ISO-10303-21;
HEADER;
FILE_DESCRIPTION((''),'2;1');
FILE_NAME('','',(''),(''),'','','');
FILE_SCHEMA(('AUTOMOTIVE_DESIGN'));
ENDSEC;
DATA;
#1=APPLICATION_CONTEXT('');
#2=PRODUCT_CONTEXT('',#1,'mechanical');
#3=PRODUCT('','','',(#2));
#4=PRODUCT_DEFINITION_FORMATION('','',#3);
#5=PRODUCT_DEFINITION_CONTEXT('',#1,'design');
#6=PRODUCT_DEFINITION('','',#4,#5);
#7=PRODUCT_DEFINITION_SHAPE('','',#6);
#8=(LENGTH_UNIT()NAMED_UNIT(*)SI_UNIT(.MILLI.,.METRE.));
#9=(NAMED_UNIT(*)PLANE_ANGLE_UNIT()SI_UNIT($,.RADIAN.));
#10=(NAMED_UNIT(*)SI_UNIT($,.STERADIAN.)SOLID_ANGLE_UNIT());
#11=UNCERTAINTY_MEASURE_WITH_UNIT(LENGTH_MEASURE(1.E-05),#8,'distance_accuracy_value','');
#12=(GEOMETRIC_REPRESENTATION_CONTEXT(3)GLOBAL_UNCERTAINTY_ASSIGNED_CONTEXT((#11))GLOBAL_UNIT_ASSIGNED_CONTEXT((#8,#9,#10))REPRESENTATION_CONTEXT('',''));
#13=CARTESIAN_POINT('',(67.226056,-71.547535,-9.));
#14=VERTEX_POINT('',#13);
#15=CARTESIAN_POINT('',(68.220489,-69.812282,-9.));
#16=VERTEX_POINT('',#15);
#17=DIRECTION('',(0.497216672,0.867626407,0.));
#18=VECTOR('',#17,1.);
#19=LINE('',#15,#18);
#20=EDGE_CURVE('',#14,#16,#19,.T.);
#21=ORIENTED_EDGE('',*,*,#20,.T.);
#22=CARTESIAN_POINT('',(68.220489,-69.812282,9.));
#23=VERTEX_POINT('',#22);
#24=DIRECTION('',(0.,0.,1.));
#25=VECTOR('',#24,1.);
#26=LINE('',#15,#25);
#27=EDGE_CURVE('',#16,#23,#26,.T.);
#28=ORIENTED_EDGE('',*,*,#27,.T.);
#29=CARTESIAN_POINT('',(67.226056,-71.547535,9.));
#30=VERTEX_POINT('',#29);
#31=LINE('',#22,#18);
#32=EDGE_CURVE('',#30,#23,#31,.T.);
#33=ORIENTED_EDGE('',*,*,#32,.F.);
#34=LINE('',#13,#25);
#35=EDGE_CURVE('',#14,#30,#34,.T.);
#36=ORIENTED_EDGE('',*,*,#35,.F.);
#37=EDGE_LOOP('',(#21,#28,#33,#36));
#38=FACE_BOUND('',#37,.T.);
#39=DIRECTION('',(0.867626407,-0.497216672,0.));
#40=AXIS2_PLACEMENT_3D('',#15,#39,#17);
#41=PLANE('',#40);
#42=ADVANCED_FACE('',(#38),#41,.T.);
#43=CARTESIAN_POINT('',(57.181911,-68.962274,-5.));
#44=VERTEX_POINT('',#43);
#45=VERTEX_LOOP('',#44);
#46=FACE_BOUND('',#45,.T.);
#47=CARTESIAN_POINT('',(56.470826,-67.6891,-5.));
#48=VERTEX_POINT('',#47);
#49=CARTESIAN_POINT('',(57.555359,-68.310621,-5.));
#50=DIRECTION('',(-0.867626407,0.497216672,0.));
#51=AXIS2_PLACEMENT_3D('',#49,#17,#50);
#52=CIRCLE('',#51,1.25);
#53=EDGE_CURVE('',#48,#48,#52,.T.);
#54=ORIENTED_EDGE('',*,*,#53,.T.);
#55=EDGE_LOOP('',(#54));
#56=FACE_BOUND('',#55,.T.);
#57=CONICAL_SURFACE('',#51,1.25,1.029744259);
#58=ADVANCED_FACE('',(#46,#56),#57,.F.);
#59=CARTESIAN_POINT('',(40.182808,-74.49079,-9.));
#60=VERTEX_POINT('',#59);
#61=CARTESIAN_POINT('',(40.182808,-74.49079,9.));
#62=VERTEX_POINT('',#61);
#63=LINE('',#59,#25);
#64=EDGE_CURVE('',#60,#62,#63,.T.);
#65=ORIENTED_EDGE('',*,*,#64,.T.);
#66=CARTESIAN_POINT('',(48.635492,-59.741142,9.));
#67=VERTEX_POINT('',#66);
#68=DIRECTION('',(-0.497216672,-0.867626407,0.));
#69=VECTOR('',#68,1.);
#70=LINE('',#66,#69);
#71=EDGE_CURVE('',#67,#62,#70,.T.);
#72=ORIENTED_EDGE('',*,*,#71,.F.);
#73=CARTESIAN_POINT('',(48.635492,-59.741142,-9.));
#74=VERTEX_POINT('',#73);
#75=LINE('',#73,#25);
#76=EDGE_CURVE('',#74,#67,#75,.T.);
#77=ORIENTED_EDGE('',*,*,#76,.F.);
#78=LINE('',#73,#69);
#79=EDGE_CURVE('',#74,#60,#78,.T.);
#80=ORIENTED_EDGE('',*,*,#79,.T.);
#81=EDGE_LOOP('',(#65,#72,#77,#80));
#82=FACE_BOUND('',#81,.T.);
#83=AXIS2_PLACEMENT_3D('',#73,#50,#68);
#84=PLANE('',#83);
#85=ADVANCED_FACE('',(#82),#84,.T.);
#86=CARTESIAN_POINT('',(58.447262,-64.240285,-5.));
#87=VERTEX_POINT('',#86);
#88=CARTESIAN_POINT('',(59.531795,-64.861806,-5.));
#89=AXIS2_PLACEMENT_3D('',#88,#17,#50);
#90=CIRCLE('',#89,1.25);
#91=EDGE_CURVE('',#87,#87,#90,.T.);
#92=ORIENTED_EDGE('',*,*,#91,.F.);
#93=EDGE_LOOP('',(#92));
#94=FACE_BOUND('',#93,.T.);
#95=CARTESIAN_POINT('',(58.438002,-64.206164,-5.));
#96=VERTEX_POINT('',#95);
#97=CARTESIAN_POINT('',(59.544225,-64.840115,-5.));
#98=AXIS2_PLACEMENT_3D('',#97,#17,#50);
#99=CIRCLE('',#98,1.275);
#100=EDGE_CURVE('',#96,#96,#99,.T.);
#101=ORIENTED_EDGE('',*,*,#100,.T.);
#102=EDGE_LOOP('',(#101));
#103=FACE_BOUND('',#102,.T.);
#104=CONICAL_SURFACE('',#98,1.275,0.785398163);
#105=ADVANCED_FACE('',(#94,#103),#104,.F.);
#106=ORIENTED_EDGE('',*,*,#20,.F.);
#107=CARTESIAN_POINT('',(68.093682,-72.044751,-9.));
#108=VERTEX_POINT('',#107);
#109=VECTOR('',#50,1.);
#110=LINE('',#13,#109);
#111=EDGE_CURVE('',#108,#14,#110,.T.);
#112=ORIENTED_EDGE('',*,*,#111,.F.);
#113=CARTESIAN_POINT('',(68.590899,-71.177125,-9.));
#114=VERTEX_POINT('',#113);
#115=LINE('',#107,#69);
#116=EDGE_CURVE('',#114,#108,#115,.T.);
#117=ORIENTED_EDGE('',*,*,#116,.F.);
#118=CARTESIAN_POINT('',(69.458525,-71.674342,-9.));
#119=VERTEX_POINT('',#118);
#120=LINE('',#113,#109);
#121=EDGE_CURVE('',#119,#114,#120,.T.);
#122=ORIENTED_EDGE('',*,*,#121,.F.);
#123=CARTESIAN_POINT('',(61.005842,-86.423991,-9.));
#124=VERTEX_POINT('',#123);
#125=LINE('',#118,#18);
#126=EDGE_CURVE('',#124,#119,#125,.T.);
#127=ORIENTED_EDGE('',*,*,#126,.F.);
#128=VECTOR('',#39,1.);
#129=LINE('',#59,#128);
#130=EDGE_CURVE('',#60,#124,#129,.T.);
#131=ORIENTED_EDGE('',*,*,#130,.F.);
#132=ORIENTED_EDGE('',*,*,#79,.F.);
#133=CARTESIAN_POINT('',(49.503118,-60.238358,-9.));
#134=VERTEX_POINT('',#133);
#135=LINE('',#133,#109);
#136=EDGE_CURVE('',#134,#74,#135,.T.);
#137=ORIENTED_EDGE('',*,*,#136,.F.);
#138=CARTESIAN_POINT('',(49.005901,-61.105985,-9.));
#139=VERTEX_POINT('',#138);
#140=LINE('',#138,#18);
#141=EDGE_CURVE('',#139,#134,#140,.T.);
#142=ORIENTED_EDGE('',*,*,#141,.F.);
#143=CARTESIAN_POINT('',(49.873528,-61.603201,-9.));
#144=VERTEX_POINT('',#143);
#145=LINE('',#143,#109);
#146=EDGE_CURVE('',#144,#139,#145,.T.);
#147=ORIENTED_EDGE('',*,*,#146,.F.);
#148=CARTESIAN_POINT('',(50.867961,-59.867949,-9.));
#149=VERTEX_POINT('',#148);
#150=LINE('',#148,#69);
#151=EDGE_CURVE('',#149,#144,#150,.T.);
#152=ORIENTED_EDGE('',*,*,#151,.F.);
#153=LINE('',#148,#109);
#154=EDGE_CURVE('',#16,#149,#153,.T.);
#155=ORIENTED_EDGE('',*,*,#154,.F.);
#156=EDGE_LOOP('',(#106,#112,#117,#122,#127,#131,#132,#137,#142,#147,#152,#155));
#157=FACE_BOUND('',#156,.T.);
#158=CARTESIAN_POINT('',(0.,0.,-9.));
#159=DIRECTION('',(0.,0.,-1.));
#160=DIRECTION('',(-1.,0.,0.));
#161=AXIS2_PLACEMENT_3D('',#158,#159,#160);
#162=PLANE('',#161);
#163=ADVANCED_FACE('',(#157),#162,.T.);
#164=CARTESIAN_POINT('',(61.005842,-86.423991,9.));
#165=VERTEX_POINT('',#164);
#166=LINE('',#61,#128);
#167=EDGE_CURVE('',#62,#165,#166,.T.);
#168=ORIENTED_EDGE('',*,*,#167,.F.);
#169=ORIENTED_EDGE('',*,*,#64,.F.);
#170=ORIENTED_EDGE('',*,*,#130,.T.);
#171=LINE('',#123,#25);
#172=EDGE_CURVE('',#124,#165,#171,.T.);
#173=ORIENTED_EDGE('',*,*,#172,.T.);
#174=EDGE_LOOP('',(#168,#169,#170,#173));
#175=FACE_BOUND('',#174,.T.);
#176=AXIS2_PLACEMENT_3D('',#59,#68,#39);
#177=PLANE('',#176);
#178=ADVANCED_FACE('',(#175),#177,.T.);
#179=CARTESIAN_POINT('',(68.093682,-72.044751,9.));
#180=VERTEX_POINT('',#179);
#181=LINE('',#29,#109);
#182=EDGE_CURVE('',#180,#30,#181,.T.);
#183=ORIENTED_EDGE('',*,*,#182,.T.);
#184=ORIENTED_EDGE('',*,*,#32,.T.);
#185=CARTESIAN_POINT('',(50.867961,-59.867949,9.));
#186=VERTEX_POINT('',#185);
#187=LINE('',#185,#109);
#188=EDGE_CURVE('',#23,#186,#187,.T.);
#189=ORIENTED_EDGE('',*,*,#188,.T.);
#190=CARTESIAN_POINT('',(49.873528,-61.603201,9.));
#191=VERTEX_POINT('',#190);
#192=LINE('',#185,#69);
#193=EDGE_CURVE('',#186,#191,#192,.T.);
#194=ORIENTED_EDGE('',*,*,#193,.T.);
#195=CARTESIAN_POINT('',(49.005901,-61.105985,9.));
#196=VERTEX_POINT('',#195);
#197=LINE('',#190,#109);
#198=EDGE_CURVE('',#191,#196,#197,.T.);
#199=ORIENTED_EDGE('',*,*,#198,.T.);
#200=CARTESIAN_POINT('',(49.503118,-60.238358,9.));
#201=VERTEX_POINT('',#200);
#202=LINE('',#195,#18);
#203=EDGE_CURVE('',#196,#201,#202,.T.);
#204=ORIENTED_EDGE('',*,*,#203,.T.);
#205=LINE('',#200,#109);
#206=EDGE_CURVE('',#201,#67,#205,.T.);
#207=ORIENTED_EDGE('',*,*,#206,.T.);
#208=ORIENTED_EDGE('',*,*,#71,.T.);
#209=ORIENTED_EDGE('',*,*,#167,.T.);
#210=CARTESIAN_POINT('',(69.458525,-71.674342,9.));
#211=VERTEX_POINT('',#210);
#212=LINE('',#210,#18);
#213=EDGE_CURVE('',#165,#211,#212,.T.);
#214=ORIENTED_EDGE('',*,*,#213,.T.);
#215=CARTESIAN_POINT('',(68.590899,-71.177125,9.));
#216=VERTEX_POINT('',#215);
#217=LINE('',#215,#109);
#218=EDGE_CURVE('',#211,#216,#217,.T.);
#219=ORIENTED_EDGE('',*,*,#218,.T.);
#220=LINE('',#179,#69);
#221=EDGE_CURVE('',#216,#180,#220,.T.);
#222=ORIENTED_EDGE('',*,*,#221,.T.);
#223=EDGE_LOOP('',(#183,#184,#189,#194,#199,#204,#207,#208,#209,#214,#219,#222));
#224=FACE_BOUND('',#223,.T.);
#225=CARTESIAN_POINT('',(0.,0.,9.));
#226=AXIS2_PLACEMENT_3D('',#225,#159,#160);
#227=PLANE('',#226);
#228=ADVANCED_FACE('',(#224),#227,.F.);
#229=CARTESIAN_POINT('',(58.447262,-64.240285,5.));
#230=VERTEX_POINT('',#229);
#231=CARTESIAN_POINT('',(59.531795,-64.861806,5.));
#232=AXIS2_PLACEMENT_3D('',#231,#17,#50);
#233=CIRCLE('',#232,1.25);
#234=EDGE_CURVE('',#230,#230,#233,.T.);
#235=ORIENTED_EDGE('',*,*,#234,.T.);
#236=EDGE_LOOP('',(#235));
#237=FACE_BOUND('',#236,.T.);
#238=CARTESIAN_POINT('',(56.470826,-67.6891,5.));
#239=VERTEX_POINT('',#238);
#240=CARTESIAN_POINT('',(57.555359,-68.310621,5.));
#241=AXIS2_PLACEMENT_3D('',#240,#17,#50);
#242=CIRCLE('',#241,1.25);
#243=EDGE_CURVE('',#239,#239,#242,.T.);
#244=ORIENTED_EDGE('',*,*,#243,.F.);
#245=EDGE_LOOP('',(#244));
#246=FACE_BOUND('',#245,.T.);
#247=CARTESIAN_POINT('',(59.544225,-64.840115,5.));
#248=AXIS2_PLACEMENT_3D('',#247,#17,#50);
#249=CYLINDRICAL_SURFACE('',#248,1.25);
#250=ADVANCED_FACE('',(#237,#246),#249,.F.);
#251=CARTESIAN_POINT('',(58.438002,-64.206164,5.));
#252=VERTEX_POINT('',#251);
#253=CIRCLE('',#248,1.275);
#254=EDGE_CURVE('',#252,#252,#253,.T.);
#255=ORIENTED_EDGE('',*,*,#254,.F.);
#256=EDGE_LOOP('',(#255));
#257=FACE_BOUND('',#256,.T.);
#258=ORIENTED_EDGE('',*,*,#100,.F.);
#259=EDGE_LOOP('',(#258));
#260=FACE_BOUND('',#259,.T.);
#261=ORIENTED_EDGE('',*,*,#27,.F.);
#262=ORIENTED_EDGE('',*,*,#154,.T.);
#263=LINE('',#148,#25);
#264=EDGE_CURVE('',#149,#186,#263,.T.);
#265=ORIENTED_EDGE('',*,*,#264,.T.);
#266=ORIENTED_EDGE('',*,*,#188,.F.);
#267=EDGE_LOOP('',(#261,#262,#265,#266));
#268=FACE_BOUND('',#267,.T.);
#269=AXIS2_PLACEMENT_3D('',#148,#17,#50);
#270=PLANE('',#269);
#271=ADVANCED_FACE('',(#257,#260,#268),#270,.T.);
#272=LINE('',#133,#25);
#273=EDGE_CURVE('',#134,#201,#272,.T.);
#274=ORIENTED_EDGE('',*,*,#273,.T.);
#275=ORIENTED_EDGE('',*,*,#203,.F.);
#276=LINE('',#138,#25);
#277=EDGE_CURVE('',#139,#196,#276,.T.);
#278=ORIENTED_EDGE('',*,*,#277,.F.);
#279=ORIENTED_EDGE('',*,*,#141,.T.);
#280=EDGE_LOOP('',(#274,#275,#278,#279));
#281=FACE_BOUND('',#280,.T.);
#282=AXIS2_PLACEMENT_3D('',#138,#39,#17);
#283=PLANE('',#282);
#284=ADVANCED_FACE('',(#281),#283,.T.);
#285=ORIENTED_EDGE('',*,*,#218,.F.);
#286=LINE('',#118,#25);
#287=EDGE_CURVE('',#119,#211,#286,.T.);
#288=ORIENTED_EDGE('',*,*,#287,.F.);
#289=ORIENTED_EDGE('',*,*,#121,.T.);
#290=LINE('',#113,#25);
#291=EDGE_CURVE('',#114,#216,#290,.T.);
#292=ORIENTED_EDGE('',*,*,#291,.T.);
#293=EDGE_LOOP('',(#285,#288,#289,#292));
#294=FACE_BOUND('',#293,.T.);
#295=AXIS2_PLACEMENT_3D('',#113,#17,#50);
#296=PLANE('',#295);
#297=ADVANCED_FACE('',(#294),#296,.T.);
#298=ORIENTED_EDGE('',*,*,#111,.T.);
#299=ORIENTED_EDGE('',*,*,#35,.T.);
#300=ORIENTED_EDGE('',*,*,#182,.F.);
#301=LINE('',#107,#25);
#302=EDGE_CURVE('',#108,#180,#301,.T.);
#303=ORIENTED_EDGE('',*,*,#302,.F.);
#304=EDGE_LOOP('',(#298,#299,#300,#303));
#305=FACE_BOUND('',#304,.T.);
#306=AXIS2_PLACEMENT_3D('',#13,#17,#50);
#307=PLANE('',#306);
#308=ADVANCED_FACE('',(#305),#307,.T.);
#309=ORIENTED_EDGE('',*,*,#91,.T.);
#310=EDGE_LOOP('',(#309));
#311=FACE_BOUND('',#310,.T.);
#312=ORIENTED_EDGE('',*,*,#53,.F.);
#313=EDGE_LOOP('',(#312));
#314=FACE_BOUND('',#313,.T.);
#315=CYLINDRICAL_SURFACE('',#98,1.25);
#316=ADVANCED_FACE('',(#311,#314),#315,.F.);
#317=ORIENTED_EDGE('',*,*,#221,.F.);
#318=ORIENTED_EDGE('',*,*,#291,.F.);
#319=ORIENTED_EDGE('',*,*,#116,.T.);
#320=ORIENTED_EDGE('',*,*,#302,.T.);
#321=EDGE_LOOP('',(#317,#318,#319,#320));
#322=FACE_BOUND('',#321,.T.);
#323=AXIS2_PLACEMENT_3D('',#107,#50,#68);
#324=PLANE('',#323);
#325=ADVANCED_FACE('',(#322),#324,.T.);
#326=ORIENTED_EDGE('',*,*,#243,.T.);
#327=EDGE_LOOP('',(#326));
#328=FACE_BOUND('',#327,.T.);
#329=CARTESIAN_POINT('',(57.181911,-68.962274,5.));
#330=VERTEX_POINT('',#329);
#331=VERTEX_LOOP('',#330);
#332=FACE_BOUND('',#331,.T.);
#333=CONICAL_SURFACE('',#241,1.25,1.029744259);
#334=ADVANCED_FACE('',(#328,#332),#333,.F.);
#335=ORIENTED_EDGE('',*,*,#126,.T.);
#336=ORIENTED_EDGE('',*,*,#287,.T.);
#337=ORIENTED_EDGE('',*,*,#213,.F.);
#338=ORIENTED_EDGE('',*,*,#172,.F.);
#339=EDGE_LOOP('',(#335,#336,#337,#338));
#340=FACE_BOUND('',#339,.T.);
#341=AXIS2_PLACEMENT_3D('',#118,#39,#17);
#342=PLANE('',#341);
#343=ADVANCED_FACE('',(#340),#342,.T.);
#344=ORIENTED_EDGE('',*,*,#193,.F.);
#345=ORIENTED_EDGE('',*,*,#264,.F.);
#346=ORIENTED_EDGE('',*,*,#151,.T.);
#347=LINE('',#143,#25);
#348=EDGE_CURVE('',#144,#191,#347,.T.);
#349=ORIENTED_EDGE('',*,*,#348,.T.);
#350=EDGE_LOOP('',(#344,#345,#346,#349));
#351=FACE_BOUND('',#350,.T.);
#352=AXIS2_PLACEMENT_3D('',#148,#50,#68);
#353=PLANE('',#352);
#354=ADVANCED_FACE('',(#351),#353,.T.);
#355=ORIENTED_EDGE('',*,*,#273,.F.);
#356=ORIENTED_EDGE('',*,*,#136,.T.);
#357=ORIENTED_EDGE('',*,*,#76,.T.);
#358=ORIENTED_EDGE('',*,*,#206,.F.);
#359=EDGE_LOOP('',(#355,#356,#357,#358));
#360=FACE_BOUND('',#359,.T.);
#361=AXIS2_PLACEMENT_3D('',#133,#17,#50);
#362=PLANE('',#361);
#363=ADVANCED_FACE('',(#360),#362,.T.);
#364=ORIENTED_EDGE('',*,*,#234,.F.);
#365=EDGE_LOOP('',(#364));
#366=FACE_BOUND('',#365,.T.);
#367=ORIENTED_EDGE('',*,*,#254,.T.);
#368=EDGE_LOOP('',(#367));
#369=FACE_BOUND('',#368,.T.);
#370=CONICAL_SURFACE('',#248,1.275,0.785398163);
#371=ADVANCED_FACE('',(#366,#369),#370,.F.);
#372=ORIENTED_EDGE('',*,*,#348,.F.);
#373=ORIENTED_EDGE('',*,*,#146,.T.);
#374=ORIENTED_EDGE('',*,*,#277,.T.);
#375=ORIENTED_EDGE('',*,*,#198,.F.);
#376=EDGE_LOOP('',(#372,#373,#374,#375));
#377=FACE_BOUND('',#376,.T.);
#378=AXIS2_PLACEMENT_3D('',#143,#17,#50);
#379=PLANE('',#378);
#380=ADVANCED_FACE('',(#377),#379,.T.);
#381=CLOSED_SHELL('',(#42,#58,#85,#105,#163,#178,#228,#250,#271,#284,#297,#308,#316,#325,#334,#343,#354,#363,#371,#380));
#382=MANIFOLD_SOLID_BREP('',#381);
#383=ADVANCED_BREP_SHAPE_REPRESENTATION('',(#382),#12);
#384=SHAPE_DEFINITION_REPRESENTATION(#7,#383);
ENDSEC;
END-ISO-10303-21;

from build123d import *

# Parameters (mm, degrees)
EXTRUDE_START                = -9
EXTRUDE_1_DEPTH              = 18
SKETCH_5_R                   = 1
CUT_EXTRUDE_1_DEPTH          = 3
HOLE_WIZARD_M3_1_D           = 2.5
HOLE_WIZARD_M3_1_DEPTH       = 4
HOLE_WIZARD_M3_1_CSINK_D     = 2.55
HOLE_WIZARD_M3_1_CSINK_ANGLE = 90
HOLE_WIZARD_M3_1_TIP         = 0.751075774


# Read off the part's stored shape, not the designer's step: 凸台-拉伸1
with BuildPart() as part:
    # 凸台-拉伸1 outline → 凸台-拉伸1 (new body)
    with BuildSketch(Plane.XY.offset(EXTRUDE_START)):
        Polygon((67.226055932, -71.547534757), (68.220489275, -69.812281944), (50.867961141, -59.867948514), (49.873527798, -61.603201327), (49.005901391, -61.105984655), (49.503118063, -60.238358249), (48.635491656, -59.741141577), (40.18280824, -74.490790491), (61.005842001, -86.423990607), (69.458525416, -71.674341694), (68.59089901, -71.177125022), (68.093682338, -72.044751429), align=None)
    extrude(amount=EXTRUDE_1_DEPTH)

    # 草图5 → 切除-拉伸1 (cut)
    with BuildSketch(Plane(origin=(-13.251129944, -23.122777084, 0), x_dir=(0.8676264066772513, -0.49721667151888715, 0), z_dir=(0.49721667151888715, 0.8676264066772513, 0))):
        with Locations(Location((83.90172843, 5, 0), (0, 0, 180))):
            Circle(SKETCH_5_R)
        with Locations(Location((83.90172843, -5, 0), (0, 0, 180))):
            Circle(SKETCH_5_R)
    extrude(amount=-CUT_EXTRUDE_1_DEPTH, mode=Mode.SUBTRACT)

    # M3 螺纹孔的螺纹孔钻头1
    with Locations(Plane(origin=(-13.251129944, -23.122777084, 0), x_dir=(0.8676264066772513, -0.49721667151888715, 0), z_dir=(0.49721667151888715, 0.8676264066772513, 0))):
        with Locations((83.90172843, 5), (83.90172843, -5)):
            CounterSinkHole(HOLE_WIZARD_M3_1_D / 2, HOLE_WIZARD_M3_1_CSINK_D / 2, depth=HOLE_WIZARD_M3_1_DEPTH, counter_sink_angle=HOLE_WIZARD_M3_1_CSINK_ANGLE)
            with Locations((0, 0, -(HOLE_WIZARD_M3_1_DEPTH + HOLE_WIZARD_M3_1_TIP / 2))):  # 118° drill point
                Cone(0, HOLE_WIZARD_M3_1_D / 2, HOLE_WIZARD_M3_1_TIP, mode=Mode.SUBTRACT)


solid = part.part
